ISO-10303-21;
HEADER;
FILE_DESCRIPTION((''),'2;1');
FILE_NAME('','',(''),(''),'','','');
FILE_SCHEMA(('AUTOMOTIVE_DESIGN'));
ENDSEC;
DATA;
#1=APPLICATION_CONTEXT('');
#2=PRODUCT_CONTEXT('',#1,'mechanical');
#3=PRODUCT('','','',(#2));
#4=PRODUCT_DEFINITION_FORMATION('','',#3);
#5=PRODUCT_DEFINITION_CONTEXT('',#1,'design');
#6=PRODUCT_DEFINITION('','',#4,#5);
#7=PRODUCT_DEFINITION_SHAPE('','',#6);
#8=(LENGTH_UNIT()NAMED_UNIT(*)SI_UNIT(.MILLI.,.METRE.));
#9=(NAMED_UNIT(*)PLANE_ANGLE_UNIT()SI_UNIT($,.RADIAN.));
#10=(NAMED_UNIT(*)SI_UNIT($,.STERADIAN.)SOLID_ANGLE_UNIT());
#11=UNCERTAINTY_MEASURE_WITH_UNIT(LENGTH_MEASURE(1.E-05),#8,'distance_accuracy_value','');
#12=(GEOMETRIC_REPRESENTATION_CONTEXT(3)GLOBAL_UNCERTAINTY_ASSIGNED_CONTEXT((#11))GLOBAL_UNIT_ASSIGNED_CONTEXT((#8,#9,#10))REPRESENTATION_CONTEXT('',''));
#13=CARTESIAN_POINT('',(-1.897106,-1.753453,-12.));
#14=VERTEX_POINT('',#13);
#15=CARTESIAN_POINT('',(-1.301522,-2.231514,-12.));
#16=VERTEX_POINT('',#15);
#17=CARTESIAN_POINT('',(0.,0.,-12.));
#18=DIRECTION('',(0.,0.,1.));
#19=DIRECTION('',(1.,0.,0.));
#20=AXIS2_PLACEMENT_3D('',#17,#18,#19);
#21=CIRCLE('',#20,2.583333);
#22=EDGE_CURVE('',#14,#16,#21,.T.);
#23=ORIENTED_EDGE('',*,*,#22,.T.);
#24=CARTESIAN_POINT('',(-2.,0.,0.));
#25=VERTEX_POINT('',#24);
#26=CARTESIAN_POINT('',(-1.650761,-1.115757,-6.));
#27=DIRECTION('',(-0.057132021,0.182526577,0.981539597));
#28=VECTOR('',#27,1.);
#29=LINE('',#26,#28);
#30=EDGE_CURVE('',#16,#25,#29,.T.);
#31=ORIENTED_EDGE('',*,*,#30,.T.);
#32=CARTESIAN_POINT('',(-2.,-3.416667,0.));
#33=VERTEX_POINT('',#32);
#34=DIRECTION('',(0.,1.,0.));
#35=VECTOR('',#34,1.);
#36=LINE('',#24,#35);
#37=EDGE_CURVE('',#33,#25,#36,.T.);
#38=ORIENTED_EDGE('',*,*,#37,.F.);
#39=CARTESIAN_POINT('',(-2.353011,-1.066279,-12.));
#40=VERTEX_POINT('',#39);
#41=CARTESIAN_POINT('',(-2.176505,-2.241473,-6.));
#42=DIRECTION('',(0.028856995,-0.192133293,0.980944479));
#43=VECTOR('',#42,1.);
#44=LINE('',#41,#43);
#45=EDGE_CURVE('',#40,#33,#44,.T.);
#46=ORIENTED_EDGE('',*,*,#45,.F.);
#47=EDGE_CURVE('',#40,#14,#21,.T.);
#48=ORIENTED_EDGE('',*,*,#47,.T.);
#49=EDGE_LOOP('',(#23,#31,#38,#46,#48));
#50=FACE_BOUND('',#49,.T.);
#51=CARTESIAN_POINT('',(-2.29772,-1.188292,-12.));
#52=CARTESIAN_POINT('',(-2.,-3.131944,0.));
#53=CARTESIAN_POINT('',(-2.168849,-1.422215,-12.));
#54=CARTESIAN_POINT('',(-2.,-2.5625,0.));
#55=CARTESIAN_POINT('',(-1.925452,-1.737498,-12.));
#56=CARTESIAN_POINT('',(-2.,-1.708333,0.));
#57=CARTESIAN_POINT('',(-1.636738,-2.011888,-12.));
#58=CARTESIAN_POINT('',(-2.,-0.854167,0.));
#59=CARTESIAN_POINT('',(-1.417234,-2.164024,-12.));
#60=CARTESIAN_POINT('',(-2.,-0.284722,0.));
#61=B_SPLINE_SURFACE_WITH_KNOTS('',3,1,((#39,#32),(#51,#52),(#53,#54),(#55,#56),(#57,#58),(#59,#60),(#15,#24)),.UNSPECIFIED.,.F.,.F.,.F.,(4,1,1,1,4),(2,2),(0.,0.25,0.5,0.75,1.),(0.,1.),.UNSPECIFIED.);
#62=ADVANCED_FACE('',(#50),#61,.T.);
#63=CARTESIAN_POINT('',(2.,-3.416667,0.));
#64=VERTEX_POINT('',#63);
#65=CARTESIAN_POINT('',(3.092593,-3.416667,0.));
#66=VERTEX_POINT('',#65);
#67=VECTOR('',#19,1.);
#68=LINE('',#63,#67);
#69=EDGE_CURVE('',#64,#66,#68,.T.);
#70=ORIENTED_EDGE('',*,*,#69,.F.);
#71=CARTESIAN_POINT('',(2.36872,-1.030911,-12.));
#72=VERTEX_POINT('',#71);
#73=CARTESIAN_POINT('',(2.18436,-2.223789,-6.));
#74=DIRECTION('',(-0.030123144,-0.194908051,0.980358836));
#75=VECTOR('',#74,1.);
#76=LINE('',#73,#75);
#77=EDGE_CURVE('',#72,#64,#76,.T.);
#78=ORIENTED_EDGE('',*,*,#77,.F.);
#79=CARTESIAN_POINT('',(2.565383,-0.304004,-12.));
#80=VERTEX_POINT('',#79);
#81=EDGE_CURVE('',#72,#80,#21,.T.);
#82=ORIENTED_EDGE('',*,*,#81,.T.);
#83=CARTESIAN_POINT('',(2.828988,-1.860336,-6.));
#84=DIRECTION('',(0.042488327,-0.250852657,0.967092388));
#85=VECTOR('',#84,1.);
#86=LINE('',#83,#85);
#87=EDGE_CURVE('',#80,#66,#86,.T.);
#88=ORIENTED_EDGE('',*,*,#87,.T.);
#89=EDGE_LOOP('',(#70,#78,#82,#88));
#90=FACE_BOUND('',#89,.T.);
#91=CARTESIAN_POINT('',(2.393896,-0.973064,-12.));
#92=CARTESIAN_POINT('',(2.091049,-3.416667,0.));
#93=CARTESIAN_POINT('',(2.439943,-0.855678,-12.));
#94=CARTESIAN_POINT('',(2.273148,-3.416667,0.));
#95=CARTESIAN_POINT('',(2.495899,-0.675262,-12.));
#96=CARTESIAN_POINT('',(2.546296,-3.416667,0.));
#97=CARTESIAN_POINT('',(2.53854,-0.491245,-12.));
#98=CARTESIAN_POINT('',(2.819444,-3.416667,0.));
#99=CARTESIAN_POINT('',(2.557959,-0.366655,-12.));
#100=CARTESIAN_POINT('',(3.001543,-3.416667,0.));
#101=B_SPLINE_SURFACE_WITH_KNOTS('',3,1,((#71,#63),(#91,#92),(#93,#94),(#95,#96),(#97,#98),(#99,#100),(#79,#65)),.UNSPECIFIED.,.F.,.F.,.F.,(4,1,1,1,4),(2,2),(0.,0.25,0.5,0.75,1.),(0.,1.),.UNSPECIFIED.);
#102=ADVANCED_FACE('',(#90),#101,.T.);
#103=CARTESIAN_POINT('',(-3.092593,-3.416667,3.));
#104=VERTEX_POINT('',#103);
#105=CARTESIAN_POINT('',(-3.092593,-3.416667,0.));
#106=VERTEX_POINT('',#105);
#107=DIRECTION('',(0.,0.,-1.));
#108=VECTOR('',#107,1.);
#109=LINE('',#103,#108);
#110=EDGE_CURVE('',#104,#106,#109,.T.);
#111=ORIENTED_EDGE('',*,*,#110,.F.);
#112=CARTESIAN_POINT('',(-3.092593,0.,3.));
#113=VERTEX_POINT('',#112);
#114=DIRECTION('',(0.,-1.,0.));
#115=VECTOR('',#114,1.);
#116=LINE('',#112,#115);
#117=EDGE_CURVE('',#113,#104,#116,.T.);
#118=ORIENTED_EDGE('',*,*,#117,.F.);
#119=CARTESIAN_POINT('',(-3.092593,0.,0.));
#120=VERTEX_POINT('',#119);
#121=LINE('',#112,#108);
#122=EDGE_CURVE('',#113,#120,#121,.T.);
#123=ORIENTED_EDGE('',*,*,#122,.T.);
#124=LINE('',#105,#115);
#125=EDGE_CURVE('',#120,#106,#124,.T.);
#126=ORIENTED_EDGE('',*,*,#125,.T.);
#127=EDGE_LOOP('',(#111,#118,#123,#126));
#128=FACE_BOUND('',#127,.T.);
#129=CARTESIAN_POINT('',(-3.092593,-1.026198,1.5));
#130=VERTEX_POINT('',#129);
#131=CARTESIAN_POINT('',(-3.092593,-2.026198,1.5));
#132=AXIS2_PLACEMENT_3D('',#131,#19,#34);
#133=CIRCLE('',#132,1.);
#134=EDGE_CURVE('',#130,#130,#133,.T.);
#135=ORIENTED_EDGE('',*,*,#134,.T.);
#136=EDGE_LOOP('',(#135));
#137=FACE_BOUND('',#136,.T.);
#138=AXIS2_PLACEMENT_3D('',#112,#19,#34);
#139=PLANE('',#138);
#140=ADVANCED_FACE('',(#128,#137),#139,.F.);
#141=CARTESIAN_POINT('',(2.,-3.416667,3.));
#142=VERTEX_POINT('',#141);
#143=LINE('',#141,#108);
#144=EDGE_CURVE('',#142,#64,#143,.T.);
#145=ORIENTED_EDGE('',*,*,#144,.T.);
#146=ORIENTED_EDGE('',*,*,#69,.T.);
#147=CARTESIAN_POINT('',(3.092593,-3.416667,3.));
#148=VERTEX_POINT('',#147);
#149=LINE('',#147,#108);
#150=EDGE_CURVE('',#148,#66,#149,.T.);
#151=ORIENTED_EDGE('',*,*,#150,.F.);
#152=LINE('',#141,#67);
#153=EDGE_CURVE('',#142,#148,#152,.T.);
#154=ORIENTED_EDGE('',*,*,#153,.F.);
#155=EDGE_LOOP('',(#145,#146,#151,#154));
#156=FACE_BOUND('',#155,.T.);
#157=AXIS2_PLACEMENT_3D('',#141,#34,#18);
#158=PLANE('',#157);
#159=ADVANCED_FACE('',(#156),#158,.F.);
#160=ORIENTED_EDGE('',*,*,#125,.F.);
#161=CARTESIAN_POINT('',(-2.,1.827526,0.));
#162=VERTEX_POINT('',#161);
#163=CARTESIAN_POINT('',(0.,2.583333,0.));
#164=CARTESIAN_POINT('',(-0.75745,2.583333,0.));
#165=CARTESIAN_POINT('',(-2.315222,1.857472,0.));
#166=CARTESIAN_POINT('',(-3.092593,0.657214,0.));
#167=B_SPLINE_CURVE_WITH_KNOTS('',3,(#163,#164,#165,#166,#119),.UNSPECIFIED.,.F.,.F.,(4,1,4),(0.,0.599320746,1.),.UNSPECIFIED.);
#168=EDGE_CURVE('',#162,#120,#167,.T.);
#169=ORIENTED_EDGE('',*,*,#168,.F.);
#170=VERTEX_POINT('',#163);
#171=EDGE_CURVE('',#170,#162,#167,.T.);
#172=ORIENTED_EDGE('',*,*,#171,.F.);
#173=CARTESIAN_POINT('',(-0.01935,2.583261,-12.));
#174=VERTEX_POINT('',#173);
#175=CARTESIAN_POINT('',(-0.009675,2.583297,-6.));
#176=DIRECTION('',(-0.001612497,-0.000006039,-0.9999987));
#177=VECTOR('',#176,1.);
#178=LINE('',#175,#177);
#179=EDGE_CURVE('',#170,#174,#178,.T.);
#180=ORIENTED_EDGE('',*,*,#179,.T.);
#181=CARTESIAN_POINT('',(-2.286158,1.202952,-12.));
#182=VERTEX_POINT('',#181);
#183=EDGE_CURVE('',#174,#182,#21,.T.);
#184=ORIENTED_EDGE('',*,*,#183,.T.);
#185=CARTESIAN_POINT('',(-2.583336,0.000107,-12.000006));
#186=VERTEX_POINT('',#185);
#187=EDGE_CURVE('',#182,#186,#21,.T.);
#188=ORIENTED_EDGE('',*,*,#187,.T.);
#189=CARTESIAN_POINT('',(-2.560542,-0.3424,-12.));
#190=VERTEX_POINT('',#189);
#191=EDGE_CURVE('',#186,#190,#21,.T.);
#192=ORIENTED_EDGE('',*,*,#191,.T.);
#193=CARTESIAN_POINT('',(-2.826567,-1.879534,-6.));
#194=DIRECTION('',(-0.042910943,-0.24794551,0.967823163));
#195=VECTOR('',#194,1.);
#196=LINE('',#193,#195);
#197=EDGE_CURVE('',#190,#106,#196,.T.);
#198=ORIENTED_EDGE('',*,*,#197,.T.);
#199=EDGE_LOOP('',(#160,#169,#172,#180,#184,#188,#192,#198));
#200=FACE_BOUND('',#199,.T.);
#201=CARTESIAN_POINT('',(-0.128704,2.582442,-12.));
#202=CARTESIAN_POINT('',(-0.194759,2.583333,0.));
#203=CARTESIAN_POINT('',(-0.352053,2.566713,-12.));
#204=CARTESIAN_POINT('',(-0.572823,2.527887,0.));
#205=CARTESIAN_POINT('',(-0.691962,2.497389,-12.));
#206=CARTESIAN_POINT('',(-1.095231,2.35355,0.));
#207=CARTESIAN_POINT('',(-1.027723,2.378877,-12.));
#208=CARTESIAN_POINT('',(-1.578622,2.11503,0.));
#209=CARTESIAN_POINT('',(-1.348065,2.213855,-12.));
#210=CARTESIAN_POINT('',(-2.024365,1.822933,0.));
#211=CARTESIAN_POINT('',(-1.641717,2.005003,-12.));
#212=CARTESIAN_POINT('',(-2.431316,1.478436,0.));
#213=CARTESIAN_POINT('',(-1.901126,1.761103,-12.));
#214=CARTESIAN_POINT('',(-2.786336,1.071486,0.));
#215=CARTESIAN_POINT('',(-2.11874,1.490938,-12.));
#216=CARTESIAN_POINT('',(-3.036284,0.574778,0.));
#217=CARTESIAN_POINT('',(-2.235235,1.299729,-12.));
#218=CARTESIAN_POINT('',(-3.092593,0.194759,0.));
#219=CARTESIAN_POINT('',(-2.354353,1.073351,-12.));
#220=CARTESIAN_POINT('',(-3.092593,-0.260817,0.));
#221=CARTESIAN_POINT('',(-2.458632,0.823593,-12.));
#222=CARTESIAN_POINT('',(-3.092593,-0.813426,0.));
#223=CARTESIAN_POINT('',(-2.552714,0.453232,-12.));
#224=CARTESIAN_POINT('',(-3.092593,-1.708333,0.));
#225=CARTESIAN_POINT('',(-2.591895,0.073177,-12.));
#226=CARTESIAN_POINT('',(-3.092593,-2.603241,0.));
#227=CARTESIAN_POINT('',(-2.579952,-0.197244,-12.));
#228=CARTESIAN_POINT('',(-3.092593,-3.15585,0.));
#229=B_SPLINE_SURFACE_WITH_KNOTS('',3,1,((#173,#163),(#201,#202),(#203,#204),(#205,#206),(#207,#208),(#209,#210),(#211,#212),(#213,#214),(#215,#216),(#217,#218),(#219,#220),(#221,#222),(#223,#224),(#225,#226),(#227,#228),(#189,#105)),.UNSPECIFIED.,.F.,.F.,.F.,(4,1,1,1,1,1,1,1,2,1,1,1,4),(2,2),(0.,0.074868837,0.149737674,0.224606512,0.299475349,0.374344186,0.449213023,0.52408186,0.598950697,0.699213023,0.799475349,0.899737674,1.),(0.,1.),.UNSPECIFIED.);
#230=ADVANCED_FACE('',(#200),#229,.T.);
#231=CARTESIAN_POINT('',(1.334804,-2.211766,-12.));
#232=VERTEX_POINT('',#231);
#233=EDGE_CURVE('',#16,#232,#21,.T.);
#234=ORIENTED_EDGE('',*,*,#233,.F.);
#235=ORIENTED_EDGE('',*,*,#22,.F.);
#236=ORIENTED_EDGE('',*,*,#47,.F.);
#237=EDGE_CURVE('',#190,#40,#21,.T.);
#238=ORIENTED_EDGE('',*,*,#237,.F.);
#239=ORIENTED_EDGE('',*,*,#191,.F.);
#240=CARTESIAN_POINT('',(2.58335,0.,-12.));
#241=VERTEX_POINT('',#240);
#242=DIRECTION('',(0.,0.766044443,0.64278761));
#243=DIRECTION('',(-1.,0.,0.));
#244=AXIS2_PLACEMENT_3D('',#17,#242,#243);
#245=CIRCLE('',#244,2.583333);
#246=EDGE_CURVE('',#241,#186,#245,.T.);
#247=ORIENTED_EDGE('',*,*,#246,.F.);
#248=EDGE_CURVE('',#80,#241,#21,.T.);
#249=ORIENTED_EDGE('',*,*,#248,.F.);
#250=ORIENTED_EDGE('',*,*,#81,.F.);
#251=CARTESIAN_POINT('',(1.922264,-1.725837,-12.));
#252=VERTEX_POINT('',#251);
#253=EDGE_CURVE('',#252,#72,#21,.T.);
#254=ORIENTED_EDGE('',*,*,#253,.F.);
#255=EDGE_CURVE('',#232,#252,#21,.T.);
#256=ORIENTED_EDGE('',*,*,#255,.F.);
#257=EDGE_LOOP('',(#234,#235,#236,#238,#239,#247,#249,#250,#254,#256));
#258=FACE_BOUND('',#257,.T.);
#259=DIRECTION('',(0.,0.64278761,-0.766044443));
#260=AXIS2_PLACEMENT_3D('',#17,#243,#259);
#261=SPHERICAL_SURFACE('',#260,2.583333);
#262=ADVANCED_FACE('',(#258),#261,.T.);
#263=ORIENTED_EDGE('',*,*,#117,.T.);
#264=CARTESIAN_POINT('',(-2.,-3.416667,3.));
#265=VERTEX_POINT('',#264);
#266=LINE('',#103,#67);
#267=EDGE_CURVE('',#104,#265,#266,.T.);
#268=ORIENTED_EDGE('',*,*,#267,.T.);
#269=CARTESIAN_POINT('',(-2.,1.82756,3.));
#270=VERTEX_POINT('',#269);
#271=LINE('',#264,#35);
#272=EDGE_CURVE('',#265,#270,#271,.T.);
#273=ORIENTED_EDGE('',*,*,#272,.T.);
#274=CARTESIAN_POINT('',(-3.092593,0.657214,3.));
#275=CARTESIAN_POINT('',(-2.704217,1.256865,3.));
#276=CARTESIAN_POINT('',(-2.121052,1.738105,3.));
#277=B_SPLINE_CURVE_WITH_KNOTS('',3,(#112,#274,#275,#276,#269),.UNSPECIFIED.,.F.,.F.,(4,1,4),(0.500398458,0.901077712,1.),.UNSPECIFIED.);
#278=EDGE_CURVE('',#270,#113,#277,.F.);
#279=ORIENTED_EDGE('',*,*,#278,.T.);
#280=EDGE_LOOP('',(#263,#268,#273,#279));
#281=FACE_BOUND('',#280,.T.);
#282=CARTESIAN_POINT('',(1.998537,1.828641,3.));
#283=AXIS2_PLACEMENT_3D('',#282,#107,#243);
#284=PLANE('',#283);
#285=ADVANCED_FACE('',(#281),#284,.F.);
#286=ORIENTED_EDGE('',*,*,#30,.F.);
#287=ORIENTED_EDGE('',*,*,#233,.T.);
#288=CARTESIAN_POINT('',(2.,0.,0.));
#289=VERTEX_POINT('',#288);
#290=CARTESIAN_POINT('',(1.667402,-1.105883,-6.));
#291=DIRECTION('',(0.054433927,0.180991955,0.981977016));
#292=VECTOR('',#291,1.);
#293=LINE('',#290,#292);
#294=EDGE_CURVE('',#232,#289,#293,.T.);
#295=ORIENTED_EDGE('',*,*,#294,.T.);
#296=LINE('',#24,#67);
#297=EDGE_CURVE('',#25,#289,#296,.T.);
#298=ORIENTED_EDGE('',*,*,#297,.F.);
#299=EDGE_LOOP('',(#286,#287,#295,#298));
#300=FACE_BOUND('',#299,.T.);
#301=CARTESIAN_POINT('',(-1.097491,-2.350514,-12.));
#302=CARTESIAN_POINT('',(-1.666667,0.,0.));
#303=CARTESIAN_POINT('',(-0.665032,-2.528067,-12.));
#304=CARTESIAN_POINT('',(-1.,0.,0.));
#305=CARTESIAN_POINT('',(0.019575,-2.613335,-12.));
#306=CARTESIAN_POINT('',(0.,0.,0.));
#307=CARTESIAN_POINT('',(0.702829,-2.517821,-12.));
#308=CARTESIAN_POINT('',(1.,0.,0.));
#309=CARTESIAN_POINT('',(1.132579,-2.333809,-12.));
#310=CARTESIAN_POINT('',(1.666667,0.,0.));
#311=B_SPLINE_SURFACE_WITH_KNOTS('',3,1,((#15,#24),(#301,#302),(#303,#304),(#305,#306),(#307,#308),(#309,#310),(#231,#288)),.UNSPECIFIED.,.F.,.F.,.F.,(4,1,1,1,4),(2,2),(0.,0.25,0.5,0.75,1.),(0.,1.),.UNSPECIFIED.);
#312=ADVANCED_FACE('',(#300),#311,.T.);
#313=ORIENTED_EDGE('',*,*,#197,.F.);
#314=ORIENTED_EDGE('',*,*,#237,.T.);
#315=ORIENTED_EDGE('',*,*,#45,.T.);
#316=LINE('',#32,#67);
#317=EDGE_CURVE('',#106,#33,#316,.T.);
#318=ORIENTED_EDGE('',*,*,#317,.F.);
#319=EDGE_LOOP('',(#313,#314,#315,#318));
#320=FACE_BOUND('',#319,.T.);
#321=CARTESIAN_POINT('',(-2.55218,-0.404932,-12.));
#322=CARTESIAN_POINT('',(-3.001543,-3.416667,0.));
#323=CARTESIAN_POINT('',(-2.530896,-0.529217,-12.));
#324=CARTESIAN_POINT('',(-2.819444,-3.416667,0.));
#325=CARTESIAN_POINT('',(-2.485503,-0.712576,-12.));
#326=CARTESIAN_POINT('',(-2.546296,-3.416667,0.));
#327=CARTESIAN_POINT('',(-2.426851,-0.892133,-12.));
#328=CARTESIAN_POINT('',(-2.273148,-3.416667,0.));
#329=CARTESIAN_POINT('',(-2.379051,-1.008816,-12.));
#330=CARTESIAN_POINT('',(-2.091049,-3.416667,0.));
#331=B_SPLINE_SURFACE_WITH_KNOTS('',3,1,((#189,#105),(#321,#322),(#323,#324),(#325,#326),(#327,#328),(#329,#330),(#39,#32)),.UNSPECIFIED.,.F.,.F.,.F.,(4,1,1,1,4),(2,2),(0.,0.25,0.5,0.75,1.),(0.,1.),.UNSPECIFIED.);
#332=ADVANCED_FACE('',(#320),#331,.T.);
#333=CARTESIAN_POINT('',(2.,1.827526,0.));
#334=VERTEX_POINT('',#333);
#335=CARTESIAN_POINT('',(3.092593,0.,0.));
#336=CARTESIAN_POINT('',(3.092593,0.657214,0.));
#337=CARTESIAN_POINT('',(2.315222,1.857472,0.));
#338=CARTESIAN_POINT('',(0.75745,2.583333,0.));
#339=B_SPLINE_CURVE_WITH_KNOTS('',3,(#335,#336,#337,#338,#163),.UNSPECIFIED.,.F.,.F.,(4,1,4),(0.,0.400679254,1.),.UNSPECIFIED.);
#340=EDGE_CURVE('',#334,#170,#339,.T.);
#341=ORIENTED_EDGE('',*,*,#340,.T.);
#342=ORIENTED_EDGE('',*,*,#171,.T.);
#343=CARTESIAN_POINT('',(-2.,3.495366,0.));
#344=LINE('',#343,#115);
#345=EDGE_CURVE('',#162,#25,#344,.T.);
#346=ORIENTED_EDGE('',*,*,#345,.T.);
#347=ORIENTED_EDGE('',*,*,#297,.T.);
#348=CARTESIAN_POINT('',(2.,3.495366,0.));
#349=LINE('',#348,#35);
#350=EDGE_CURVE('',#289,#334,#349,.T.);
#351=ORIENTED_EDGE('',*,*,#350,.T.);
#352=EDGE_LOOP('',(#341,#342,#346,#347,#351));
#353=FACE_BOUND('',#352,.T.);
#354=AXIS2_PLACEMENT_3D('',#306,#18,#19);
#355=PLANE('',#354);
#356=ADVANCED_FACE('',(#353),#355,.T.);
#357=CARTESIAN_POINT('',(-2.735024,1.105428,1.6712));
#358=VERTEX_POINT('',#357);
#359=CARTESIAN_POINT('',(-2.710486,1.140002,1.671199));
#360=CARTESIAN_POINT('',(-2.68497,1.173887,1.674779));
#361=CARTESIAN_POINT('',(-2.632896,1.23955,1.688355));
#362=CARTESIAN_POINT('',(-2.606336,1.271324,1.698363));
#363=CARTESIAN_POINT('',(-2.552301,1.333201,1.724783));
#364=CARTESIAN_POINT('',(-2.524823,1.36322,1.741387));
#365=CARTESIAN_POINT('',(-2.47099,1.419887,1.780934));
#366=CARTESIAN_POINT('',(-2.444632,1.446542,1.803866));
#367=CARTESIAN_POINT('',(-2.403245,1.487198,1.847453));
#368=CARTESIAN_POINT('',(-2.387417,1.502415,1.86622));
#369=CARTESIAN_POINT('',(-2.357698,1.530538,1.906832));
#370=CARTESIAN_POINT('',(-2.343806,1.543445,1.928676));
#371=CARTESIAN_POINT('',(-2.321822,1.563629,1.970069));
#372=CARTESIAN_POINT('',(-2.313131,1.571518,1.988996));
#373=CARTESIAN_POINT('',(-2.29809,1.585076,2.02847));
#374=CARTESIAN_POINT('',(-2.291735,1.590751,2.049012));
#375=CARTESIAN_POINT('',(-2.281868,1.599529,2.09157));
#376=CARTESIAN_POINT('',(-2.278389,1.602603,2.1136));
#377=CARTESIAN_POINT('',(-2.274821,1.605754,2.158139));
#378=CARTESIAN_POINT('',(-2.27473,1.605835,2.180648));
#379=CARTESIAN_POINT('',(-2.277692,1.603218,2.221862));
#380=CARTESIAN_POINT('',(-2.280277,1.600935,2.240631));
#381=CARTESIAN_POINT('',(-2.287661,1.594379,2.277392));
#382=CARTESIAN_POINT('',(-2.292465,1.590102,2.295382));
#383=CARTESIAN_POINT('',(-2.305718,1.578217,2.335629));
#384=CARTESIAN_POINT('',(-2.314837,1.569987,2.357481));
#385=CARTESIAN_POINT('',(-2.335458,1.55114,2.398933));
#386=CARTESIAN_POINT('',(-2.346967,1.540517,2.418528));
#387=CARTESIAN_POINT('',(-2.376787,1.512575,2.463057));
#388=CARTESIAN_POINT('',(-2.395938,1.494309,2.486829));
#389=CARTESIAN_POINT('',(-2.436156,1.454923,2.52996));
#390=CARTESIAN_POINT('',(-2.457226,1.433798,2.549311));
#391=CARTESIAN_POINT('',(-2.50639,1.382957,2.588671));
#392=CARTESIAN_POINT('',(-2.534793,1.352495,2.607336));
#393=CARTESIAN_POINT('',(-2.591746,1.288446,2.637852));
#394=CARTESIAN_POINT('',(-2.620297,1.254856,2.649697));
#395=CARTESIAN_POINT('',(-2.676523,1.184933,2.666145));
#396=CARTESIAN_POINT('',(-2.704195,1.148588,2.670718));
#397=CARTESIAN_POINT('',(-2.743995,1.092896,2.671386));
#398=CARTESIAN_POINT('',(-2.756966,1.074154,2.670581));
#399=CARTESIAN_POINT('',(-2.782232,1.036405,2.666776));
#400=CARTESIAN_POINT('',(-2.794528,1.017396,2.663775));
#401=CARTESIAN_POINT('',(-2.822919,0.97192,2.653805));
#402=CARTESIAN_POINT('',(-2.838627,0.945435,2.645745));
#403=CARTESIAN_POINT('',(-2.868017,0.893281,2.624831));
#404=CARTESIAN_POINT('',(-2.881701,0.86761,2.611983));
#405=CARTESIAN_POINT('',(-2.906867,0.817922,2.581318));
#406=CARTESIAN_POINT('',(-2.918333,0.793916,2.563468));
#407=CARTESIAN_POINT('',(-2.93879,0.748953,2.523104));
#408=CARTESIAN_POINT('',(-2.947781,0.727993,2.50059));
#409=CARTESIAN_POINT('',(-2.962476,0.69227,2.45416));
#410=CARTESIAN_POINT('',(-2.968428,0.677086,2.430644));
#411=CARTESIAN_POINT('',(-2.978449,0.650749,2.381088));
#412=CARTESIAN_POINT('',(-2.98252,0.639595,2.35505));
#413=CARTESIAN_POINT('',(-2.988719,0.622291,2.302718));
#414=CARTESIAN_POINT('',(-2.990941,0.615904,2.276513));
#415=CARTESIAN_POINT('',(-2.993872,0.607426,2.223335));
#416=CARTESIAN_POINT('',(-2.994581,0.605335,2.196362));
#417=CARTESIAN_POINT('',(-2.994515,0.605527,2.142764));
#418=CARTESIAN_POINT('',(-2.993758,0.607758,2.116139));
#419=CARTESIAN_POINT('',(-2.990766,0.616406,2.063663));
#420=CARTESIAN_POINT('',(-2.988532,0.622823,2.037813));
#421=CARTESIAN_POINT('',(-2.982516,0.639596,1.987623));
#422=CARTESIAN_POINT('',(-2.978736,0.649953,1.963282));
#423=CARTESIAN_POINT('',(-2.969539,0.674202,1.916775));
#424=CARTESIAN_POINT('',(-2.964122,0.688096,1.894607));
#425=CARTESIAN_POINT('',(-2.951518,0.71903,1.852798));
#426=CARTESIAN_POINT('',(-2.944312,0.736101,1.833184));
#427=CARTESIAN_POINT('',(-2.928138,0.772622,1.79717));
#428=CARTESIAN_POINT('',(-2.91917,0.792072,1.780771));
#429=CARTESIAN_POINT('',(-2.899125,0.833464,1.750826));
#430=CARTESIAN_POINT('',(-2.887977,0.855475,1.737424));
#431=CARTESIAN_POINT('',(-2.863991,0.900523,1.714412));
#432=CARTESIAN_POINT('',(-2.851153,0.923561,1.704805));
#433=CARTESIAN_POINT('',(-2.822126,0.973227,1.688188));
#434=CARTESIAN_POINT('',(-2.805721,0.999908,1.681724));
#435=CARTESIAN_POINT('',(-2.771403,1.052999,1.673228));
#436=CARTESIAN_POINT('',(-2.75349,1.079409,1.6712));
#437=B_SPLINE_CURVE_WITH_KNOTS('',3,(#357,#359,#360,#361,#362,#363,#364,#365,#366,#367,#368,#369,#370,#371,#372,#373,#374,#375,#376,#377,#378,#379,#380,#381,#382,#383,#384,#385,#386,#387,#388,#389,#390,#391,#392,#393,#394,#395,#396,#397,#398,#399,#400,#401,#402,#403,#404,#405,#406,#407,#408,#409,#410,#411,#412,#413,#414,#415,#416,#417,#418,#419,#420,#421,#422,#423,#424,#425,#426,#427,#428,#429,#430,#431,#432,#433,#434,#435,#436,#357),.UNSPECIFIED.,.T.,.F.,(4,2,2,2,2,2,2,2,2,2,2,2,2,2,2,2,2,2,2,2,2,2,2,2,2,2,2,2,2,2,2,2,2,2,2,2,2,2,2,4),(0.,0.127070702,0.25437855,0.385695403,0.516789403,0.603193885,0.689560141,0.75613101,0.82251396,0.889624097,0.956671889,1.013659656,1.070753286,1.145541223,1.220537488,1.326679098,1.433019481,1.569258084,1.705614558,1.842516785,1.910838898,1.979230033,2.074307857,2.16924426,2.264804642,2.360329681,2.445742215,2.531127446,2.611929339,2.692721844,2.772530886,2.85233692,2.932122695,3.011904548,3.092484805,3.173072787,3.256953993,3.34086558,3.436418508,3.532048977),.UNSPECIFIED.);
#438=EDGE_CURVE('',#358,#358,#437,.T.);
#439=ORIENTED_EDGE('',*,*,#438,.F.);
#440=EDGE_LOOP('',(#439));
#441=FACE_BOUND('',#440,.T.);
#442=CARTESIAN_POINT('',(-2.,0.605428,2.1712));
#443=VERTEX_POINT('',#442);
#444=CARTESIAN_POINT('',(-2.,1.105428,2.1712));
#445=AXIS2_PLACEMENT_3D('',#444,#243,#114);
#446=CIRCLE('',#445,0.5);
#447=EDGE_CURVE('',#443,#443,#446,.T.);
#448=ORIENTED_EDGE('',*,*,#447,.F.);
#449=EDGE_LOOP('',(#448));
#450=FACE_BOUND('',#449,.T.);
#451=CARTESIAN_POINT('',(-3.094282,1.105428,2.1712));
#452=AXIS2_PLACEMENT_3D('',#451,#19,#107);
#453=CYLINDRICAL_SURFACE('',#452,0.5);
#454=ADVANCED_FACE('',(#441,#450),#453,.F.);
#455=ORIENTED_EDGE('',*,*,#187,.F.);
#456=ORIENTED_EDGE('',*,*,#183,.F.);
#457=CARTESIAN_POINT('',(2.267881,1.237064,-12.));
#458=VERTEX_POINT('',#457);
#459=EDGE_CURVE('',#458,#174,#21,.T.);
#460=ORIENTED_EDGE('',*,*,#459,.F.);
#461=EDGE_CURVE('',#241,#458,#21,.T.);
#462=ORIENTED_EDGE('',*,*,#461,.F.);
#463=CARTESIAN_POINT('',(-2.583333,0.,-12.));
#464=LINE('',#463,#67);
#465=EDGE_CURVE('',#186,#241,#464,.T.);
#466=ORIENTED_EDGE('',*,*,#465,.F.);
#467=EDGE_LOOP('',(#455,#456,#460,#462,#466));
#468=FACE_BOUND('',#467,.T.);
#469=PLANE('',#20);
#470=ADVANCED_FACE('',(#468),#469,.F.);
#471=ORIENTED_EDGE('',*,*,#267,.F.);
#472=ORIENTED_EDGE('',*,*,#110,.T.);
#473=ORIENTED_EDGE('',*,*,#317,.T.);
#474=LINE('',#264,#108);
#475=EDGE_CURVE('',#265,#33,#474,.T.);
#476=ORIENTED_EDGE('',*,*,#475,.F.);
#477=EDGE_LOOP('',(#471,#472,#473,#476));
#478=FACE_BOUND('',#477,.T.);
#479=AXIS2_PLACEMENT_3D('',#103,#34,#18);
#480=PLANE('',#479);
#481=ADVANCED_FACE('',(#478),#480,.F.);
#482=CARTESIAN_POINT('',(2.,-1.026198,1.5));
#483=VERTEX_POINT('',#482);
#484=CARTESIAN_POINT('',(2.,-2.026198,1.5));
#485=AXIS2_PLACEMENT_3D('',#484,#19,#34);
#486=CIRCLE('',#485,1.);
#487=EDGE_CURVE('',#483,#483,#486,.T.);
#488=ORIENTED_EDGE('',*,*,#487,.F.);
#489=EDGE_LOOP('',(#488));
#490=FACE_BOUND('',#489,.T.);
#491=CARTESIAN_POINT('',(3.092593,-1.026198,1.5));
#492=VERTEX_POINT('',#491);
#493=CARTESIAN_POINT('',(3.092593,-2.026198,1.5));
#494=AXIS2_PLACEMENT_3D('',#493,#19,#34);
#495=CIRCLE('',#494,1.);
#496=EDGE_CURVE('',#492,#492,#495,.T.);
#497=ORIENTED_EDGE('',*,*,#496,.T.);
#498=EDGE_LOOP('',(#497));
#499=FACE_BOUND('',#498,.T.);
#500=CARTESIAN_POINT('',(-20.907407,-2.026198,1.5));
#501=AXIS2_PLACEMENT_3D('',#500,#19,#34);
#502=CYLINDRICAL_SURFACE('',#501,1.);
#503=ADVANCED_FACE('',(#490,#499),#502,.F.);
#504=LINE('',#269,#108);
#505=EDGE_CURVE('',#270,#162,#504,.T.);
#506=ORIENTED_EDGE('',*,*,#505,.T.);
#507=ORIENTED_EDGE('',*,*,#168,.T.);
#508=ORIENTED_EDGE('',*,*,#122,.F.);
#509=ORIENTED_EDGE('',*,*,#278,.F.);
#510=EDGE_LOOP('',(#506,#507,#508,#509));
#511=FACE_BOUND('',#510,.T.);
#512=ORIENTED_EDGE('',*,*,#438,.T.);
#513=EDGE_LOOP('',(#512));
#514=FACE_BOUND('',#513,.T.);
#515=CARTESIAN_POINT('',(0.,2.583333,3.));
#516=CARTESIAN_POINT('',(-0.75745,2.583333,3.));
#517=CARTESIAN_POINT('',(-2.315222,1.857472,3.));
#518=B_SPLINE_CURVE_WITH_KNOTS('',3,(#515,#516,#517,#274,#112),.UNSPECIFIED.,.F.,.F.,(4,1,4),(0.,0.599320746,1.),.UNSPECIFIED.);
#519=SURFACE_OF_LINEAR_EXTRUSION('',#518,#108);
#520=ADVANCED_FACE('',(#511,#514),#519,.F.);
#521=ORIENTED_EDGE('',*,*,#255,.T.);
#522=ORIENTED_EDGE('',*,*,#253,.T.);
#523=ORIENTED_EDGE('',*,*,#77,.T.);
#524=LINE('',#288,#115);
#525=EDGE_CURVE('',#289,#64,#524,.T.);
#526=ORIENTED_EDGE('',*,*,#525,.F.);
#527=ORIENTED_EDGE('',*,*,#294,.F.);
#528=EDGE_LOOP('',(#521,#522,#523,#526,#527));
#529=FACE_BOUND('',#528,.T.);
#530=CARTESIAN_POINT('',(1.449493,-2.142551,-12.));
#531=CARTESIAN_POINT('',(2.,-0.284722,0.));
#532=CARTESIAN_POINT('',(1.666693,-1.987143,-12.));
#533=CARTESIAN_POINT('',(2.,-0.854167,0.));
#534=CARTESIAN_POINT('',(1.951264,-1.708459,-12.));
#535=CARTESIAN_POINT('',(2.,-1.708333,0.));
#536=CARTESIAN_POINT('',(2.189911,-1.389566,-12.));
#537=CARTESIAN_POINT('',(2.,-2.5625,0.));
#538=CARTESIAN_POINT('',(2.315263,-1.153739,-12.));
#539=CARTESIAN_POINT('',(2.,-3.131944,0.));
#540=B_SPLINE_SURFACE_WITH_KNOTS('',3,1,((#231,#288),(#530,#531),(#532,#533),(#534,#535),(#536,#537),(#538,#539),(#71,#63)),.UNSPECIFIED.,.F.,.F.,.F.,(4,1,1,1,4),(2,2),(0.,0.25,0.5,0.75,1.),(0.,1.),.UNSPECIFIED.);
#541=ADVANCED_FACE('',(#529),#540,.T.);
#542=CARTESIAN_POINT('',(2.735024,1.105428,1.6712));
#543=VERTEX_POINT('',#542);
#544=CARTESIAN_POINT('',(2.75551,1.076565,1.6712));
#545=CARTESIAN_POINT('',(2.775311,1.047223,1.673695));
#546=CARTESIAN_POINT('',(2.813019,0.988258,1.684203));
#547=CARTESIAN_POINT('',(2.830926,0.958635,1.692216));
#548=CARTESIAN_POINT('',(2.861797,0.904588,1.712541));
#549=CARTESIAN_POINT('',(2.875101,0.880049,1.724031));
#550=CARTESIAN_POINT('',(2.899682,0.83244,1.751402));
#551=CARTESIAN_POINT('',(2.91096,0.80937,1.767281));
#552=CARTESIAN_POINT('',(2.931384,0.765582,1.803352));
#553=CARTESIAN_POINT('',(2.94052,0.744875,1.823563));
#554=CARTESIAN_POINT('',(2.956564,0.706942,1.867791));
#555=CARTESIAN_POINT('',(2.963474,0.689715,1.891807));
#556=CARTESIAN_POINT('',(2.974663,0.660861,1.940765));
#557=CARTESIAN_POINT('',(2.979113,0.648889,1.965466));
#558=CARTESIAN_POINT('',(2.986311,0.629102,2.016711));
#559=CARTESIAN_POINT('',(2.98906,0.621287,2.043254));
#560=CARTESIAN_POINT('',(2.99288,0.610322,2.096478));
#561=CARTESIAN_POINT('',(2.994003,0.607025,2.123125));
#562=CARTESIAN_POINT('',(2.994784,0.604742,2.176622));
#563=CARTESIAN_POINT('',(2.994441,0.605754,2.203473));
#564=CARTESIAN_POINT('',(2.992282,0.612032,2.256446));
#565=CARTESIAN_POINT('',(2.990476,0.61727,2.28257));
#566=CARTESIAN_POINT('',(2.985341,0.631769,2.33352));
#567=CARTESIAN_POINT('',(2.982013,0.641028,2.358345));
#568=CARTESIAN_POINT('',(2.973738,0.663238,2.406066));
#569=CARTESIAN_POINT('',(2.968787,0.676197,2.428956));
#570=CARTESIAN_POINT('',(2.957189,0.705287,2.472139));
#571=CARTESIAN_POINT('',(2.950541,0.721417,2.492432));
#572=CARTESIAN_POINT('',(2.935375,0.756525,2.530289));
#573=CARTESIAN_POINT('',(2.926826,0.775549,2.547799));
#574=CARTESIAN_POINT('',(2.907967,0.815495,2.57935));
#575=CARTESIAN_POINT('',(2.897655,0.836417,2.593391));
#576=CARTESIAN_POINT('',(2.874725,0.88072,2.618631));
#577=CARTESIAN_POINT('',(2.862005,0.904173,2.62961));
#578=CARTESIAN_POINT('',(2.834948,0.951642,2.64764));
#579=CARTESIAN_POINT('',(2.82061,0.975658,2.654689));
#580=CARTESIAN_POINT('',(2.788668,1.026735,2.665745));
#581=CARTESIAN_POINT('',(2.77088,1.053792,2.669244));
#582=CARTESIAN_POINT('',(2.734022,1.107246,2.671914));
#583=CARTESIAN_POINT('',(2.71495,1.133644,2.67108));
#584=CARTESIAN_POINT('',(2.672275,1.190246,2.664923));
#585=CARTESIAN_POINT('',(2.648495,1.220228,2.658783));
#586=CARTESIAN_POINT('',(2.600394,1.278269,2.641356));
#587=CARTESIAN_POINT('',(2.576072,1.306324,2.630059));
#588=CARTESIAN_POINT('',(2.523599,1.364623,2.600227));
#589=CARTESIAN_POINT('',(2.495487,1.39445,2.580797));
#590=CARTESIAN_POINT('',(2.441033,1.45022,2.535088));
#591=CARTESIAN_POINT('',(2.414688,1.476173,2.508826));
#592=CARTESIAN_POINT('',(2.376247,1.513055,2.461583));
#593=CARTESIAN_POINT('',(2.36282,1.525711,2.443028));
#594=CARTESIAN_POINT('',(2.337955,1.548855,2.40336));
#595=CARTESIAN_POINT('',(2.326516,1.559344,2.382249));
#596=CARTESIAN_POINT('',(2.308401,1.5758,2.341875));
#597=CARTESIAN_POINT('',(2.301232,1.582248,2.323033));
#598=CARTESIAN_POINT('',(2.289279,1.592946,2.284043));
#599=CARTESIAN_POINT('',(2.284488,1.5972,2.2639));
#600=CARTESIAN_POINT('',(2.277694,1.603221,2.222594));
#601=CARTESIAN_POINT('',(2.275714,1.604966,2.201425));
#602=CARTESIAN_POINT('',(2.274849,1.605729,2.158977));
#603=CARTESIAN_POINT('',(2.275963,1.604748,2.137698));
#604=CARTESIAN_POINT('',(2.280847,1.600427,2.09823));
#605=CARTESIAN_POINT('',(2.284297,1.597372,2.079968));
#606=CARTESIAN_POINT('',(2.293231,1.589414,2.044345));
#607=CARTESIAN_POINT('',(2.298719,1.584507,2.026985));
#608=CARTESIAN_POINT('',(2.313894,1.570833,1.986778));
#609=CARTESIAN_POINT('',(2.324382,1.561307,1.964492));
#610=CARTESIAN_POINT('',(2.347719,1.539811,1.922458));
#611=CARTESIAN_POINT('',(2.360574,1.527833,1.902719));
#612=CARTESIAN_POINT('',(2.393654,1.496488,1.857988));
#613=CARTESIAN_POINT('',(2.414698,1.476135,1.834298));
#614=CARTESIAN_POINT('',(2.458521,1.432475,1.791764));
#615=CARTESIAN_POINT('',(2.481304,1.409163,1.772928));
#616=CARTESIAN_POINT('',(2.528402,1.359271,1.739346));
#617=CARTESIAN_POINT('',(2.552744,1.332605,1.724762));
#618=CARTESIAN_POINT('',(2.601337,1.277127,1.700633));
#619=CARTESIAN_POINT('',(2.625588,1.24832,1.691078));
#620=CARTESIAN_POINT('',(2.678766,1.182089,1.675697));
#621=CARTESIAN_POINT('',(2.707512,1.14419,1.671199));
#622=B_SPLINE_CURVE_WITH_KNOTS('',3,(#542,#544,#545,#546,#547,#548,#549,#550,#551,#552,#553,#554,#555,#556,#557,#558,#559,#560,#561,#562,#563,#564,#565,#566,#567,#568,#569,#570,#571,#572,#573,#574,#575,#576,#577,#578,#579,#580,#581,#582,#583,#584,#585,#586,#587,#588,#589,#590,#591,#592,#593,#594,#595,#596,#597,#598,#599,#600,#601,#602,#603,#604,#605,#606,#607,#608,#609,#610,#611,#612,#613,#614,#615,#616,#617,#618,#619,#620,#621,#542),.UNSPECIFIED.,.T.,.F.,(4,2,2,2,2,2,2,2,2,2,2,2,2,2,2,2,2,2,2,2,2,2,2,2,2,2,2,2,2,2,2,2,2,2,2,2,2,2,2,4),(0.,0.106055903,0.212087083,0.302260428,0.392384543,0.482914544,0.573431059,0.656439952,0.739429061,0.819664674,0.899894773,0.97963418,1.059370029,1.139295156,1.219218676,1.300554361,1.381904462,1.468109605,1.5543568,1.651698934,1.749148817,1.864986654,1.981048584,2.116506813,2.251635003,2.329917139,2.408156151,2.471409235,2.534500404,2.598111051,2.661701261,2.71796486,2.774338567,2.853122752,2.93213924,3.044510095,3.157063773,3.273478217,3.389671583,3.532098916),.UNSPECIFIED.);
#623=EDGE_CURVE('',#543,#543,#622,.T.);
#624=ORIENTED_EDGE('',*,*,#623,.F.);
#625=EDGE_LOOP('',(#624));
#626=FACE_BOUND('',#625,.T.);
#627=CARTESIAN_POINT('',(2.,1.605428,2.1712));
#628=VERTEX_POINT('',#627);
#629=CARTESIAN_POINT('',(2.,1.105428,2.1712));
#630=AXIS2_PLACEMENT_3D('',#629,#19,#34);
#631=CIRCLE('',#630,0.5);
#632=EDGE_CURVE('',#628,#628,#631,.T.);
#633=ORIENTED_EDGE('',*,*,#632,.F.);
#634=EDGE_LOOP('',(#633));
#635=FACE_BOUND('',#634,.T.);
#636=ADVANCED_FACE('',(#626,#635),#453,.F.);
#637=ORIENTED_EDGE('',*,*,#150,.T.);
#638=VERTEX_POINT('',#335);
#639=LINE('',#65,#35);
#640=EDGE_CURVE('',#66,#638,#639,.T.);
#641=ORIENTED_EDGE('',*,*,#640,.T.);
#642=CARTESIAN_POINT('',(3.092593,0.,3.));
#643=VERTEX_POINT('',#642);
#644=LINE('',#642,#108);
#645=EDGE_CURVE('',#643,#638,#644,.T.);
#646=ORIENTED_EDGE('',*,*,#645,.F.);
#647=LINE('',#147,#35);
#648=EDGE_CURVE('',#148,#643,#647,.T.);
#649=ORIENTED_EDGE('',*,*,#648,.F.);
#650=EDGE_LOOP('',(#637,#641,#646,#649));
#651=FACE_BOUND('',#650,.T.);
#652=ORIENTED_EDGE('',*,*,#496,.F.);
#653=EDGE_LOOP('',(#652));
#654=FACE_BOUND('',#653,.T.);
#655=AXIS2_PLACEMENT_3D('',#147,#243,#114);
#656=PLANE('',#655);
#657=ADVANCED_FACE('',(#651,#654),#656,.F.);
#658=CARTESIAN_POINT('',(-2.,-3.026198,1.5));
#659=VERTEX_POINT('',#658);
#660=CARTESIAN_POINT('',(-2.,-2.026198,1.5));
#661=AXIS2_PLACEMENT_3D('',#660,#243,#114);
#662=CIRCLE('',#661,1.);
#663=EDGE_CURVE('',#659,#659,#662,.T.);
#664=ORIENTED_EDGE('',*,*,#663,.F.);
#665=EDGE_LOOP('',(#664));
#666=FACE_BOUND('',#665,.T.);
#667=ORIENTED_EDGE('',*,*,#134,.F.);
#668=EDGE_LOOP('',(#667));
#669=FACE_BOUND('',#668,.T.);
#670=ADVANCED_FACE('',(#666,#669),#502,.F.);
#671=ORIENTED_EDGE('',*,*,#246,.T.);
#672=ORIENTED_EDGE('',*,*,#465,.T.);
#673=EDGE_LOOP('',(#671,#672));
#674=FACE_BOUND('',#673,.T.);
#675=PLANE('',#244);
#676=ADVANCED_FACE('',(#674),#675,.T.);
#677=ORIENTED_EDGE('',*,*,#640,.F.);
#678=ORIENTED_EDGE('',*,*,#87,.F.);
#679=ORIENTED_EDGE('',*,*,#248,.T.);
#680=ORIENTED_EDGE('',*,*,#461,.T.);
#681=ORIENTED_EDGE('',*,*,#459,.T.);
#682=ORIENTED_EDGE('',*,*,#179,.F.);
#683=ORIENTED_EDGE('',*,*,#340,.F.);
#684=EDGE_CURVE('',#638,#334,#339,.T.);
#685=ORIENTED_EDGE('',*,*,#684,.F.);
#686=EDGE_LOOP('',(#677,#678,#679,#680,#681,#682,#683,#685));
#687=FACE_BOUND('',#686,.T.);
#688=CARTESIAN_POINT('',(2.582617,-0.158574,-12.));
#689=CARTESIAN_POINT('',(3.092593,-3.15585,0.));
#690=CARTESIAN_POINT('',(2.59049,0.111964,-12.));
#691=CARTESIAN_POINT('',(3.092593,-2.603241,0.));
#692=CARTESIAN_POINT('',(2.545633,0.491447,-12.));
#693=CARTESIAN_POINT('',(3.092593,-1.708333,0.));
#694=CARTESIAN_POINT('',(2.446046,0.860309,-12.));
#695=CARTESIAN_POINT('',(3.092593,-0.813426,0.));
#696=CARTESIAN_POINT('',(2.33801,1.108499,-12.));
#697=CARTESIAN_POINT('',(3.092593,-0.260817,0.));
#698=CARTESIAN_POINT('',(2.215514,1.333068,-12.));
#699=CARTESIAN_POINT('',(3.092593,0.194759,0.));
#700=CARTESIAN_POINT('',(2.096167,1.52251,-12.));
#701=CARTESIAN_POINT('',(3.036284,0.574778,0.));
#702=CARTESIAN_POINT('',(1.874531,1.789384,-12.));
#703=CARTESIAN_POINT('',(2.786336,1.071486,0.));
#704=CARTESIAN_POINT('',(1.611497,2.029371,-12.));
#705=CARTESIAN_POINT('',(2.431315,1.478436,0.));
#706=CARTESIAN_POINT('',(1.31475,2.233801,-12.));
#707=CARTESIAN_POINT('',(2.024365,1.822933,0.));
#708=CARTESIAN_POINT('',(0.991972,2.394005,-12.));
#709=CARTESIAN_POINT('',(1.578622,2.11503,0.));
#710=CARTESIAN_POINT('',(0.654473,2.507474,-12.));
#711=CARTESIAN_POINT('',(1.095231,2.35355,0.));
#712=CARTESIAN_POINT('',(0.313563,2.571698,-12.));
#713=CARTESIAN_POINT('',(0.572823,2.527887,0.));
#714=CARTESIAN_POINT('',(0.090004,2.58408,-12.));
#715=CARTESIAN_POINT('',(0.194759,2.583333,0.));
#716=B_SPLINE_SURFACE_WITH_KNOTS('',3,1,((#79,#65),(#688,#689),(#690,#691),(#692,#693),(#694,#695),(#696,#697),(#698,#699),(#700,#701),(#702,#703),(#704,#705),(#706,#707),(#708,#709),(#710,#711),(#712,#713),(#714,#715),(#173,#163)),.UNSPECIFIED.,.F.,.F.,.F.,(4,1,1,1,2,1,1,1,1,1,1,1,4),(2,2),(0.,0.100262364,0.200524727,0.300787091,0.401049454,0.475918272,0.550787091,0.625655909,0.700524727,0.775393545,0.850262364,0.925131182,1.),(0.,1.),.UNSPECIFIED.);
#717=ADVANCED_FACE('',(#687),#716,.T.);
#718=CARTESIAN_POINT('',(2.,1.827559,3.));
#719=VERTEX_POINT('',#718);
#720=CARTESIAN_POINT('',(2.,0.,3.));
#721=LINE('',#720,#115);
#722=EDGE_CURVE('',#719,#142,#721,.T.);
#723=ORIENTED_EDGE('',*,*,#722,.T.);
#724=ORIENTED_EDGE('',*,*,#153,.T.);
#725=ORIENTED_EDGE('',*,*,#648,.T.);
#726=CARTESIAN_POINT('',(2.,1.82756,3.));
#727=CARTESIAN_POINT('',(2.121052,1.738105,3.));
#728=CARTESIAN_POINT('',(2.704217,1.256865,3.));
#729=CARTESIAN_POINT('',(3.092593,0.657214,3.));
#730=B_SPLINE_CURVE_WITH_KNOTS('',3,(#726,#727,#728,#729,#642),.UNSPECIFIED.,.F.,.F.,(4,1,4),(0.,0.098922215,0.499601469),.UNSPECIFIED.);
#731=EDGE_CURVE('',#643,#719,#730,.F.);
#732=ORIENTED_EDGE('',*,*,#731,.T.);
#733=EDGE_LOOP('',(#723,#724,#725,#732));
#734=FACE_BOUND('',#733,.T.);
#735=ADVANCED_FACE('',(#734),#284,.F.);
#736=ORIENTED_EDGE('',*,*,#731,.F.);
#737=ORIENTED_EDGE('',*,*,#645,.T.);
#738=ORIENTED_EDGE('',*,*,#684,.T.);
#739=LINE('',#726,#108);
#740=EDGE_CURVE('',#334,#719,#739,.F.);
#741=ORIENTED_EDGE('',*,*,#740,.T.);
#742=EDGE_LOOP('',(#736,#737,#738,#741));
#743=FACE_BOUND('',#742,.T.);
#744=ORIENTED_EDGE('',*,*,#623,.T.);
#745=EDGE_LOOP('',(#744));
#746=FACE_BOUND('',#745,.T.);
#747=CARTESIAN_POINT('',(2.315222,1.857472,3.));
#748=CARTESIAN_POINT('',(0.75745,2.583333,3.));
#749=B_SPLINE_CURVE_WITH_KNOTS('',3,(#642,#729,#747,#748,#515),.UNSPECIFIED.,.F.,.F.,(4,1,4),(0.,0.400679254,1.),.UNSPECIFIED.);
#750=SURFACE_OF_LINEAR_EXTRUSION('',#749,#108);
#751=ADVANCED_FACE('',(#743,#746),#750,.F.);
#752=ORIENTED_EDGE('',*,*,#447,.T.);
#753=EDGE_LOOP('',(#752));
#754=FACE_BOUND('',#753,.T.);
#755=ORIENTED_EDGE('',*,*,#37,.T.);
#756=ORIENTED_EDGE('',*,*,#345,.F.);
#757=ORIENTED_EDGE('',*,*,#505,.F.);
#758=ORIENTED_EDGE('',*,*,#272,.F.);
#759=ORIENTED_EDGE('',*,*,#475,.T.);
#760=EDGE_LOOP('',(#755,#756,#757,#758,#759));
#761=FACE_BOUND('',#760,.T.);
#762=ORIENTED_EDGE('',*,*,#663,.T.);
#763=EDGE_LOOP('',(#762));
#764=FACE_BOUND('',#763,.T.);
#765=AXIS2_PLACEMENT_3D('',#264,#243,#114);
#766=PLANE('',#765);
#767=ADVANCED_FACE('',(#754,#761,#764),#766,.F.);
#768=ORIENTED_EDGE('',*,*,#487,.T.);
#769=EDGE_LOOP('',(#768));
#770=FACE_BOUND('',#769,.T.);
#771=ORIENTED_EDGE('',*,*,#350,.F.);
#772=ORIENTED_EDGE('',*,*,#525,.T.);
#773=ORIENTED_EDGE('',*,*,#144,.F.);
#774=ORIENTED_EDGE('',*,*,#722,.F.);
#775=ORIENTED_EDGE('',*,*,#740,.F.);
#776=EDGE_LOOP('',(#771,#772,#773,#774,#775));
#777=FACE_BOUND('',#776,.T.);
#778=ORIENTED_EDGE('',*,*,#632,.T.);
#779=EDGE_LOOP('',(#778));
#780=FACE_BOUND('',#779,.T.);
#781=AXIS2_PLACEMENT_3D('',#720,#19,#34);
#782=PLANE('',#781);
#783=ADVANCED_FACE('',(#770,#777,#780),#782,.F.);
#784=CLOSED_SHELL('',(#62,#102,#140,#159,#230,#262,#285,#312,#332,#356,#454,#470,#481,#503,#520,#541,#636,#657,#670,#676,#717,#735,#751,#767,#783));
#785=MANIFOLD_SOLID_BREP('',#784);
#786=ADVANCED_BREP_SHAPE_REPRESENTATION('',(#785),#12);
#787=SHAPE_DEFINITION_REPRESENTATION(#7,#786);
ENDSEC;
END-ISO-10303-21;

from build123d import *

# Parameters (mm, degrees)
BOSS_EXTRUDE1_DEPTH     = 3
SKETCH5_R               = 1
CUT_EXTRUDE1_DEPTH      = 24
REVOLVE1_ANGLE          = 130
CUT_EXTRUDE2_START      = -3
CUT_EXTRUDE2_DEPTH      = 3
CUT_EXTRUDE3_DEPTH      = 16.294160731
CUT_EXTRUDE3_DEPTH_BACK = 16.294160731
SKETCH8_R               = 0.5


with BuildPart() as part:
    # Loft1: read off the stored shape, not the designer's step
    # Loft1: loft between two sections, ruled curve by curve
    loft1_from = [
        Edge.make_bspline([(-0.01934999, 2.583260864, -12), (-0.12870412, 2.582441743, -12), (-0.352052901, 2.566712627, -12), (-0.69196248, 2.49738866, -12), (-1.027723307, 2.378876735, -12), (-1.348064896, 2.213855273, -12), (-1.641716759, 2.005002694, -12), (-1.901125968, 1.761102566, -12), (-2.118739593, 1.49093846, -12), (-2.235234683, 1.29972921, -12), (-2.35435273, 1.073350555, -12), (-2.458631501, 0.823593102, -12), (-2.552714219, 0.453231677, -12), (-2.591894644, 0.07317688, -12), (-2.579952112, -0.197244237, -12), (-2.560541561, -0.342400387, -12)], [0, 0, 0, 0, 0.074868837, 0.149737674, 0.224606512, 0.299475349, 0.374344186, 0.449213023, 0.52408186, 0.598950697, 0.598950697, 0.699213023, 0.799475349, 0.899737674, 1, 1, 1, 1], 3),
        Edge.make_bspline([(-2.560541561, -0.342400387, -12), (-2.552179672, -0.404932339, -12), (-2.530896436, -0.529217273, -12), (-2.485503098, -0.71257565, -12), (-2.426851171, -0.892132885, -12), (-2.379050754, -1.008815537, -12), (-2.353010745, -1.0662793, -12)], [0, 0, 0, 0, 0.25, 0.5, 0.75, 1, 1, 1, 1], 3),
        Edge.make_bspline([(2.565383476, -0.304004497, -12), (2.582617384, -0.158573806, -12), (2.590489998, 0.111964311, -12), (2.545633291, 0.491446815, -12), (2.446046116, 0.860308715, -12), (2.33800955, 1.108498781, -12), (2.215513655, 1.333067645, -12), (2.096167306, 1.522510287, -12), (1.874530999, 1.789384177, -12), (1.611497206, 2.029370957, -12), (1.314749599, 2.233801165, -12), (0.991971851, 2.39400534, -12), (0.654473334, 2.507474198, -12), (0.313563418, 2.571698452, -12), (0.090004112, 2.584079984, -12), (-0.01934999, 2.583260864, -12)], [0, 0, 0, 0, 0.100262364, 0.200524727, 0.300787091, 0.401049454, 0.401049454, 0.475918272, 0.550787091, 0.625655909, 0.700524727, 0.775393545, 0.850262364, 0.925131182, 1, 1, 1, 1], 3),
        Edge.make_bspline([(-2.353010745, -1.0662793, -12), (-2.29771989, -1.188292337, -12), (-2.168849346, -1.422215103, -12), (-1.925452005, -1.737497814, -12), (-1.636738114, -2.011887579, -12), (-1.41723447, -2.164024451, -12), (-1.301521549, -2.23151356, -12)], [0, 0, 0, 0, 0.25, 0.5, 0.75, 1, 1, 1, 1], 3),
        Edge.make_bspline([(-1.301521549, -2.23151356, -12), (-1.097491105, -2.350513518, -12), (-0.665032412, -2.528066554, -12), (0.019575259, -2.613334671, -12), (0.702828775, -2.51782055, -12), (1.132579159, -2.333809112, -12), (1.334804064, -2.211766087, -12)], [0, 0, 0, 0, 0.25, 0.5, 0.75, 1, 1, 1, 1], 3),
        Edge.make_bspline([(1.334804064, -2.211766087, -12), (1.449492999, -2.142551147, -12), (1.666692969, -1.987143133, -12), (1.951264045, -1.708459161, -12), (2.189911071, -1.389565682, -12), (2.315262941, -1.153738656, -12), (2.36871981, -1.030911041, -12)], [0, 0, 0, 0, 0.25, 0.5, 0.75, 1, 1, 1, 1], 3),
        Edge.make_bspline([(2.36871981, -1.030911041, -12), (2.393896077, -0.97306364, -12), (2.439943199, -0.855678021, -12), (2.495898739, -0.675262315, -12), (2.538540234, -0.491244511, -12), (2.557959267, -0.366654695, -12), (2.565383476, -0.304004497, -12)], [0, 0, 0, 0, 0.25, 0.5, 0.75, 1, 1, 1, 1], 3),
    ]
    loft1_to = [
        Edge.make_bspline([(0, 2.583333333, 0), (-0.194758696, 2.583333333, 0), (-0.572822925, 2.527886539, 0), (-1.095230667, 2.35354965, 0), (-1.578621904, 2.115029917, 0), (-2.024365458, 1.822933485, 0), (-2.431315545, 1.478435559, 0), (-2.786336259, 1.071485923, 0), (-3.036283572, 0.574778229, 0), (-3.092592593, 0.194758696, 0), (-3.092592593, -0.260816816, 0), (-3.092592593, -0.81342571, 0), (-3.092592593, -1.708333333, 0), (-3.092592593, -2.603240956, 0), (-3.092592593, -3.15584985, 0), (-3.092592593, -3.416666667, 0)], [0, 0, 0, 0, 0.074868837, 0.149737674, 0.224606512, 0.299475349, 0.374344186, 0.449213023, 0.52408186, 0.598950697, 0.598950697, 0.699213023, 0.799475349, 0.899737674, 1, 1, 1, 1], 3),
        Edge.make_bspline([(-3.092592593, -3.416666667, 0), (-3.00154321, -3.416666667, 0), (-2.819444444, -3.416666667, 0), (-2.546296296, -3.416666667, 0), (-2.273148148, -3.416666667, 0), (-2.091049383, -3.416666667, 0), (-2, -3.416666667, 0)], [0, 0, 0, 0, 0.25, 0.5, 0.75, 1, 1, 1, 1], 3),
        Edge.make_bspline([(3.092592593, -3.416666667, 0), (3.092592593, -3.155849948, 0), (3.092592593, -2.603241145, 0), (3.092592593, -1.708333333, 0), (3.092592593, -0.813425522, 0), (3.092592593, -0.260816718, 0), (3.092592593, 0.19475876, 0), (3.036283535, 0.574778362, 0), (2.786336177, 1.071486034, 0), (2.431315484, 1.478435612, 0), (2.024365456, 1.822933483, 0), (1.578621973, 2.115029874, 0), (1.095230792, 2.353549597, 0), (0.572823057, 2.527886507, 0), (0.19475876, 2.583333333, 0), (0, 2.583333333, 0)], [0, 0, 0, 0, 0.100262364, 0.200524727, 0.300787091, 0.401049454, 0.401049454, 0.475918272, 0.550787091, 0.625655909, 0.700524727, 0.775393545, 0.850262364, 0.925131182, 1, 1, 1, 1], 3),
        Edge.make_bspline([(-2, -3.416666667, 0), (-2, -3.131944444, 0), (-2, -2.5625, 0), (-2, -1.708333333, 0), (-2, -0.854166667, 0), (-2, -0.284722222, 0), (-2, 0, 0)], [0, 0, 0, 0, 0.25, 0.5, 0.75, 1, 1, 1, 1], 3),
        Edge.make_bspline([(-2, 0, 0), (-1.666666667, 0, 0), (-1, 0, 0), (0, 0, 0), (1, 0, 0), (1.666666667, 0, 0), (2, 0, 0)], [0, 0, 0, 0, 0.25, 0.5, 0.75, 1, 1, 1, 1], 3),
        Edge.make_bspline([(2, 0, 0), (2, -0.284722222, 0), (2, -0.854166667, 0), (2, -1.708333333, 0), (2, -2.5625, 0), (2, -3.131944444, 0), (2, -3.416666667, 0)], [0, 0, 0, 0, 0.25, 0.5, 0.75, 1, 1, 1, 1], 3),
        Edge.make_bspline([(2, -3.416666667, 0), (2.091049383, -3.416666667, 0), (2.273148148, -3.416666667, 0), (2.546296296, -3.416666667, 0), (2.819444444, -3.416666667, 0), (3.00154321, -3.416666667, 0), (3.092592593, -3.416666667, 0)], [0, 0, 0, 0, 0.25, 0.5, 0.75, 1, 1, 1, 1], 3),
    ]
    loft1 = Solid(Shell([*[Face.make_surface_from_curves(loft1_from[k], loft1_to[k]) for k in range(7)], Face(Wire(loft1_from)), Face(Wire(loft1_to))]))
    add(loft1)

    # Sketch4 → Boss-Extrude1 (add)
    with BuildSketch(Plane.XY):
        with BuildLine():
            Line((2, -3.416666667), (3.092592593, -3.416666667))
            Line((3.092592593, -3.416666667), (3.092592593, 0))
            add(Edge.make_bspline(
                [(3.092592593, 0), (3.092592593, 0.657213879), (2.315221802, 1.857472098), (0.757450401, 2.583333333), (0, 2.583333333)],
                knots=[0, 0, 0, 0, 0.400679254, 1, 1, 1, 1], degree=3))
            add(Edge.make_bspline(
                [(0, 2.583333333), (-0.757450401, 2.583333333), (-2.315221802, 1.857472098), (-3.092592593, 0.657213879), (-3.092592593, 0)],
                knots=[0, 0, 0, 0, 0.599320746, 1, 1, 1, 1], degree=3))
            Line((-3.092592593, 0), (-3.092592593, -3.416666667))
            Line((-3.092592593, -3.416666667), (-2, -3.416666667))
            Line((-2, -3.416666667), (-2, 0))
            Line((-2, 0), (2, 0))
            Line((2, 0), (2, -3.416666667))
        make_face()
    extrude(amount=BOSS_EXTRUDE1_DEPTH)

    # Sketch5 → Cut-Extrude1 (cut)
    with BuildSketch(Plane(origin=(3.092592593, 0, 0), x_dir=(0, 0, -1), z_dir=(1, 0, 0))):
        with Locations(Location((-1.5, -2.026197999, 0), (0, 0, 90))):
            Circle(SKETCH5_R)
    extrude(amount=-CUT_EXTRUDE1_DEPTH, mode=Mode.SUBTRACT)

    # Sketch6 → Revolve1 (revolve)
    with BuildSketch(Plane(origin=(0, 0, -12), x_dir=(-1, 0, 0), z_dir=(0, 0, -1))):
        with BuildLine():
            Line((2.583333333, 0), (-2.583333333, 0))
            ThreePointArc((-2.583333333, 0), (-2.578841965, -0.152266979), (-2.565383476, -0.304004497))
            ThreePointArc((-2.565383476, -0.304004497), (-2.49368043, -0.674662155), (-2.36871981, -1.030911041))
            ThreePointArc((-2.36871981, -1.030911041), (-1.943611826, -1.701759143), (-1.334804064, -2.211766087))
            ThreePointArc((-1.334804064, -2.211766087), (-0.01934999, -2.583260864), (1.301521549, -2.23151356))
            ThreePointArc((1.301521549, -2.23151356), (1.917901012, -1.730683917), (2.353010745, -1.0662793))
            ThreePointArc((2.353010745, -1.0662793), (2.483294029, -0.711942326), (2.560541561, -0.342400387))
            ThreePointArc((2.560541561, -0.342400387), (2.577629093, -0.171579056), (2.583333333, 0))
        make_face()
    revolve(axis=Axis((2.583333333, 0, -12), (1, 0, 0)), revolution_arc=REVOLVE1_ANGLE)

    # Cut-Extrude2: read off the stored shape, not the designer's step
    # Cut-Extrude2 outline → Cut-Extrude2 (cut)
    with BuildSketch(Plane.XY.offset(3).offset(CUT_EXTRUDE2_START)):
        with BuildLine():
            Line((-2, 0), (2, 0))
            Line((2, 0), (2.000000128, 1.827559626))
            add(Edge.make_bspline(
                [(2.000000128, 1.827559626), (1.387657851, 2.280065503), (0.632427745, 2.583333333), (-0.632427668, 2.583333333), (-1.387657668, 2.280065577), (-1.999999905, 1.827559791)],
                knots=[0.499601469, 0.499601469, 0.499601469, 0.499601469, 1, 1, 1.50039847, 1.50039847, 1.50039847, 1.50039847], degree=3))
            Line((-1.999999905, 1.827559791), (-2, 0))
        make_face()
    extrude(amount=CUT_EXTRUDE2_DEPTH, mode=Mode.SUBTRACT)

    # Sketch8 → Cut-Extrude3 (cut, two sides: drawn at the far end of the back side and taken through both)
    with BuildSketch(Plane(origin=(0, 0, 0), x_dir=(0, 0, -1), z_dir=(1, 0, 0)).offset(-CUT_EXTRUDE3_DEPTH_BACK)):
        with Locations((-2.171199761, 1.105428282)):
            Circle(SKETCH8_R)
    extrude(amount=CUT_EXTRUDE3_DEPTH + CUT_EXTRUDE3_DEPTH_BACK, mode=Mode.SUBTRACT)


solid = part.part
